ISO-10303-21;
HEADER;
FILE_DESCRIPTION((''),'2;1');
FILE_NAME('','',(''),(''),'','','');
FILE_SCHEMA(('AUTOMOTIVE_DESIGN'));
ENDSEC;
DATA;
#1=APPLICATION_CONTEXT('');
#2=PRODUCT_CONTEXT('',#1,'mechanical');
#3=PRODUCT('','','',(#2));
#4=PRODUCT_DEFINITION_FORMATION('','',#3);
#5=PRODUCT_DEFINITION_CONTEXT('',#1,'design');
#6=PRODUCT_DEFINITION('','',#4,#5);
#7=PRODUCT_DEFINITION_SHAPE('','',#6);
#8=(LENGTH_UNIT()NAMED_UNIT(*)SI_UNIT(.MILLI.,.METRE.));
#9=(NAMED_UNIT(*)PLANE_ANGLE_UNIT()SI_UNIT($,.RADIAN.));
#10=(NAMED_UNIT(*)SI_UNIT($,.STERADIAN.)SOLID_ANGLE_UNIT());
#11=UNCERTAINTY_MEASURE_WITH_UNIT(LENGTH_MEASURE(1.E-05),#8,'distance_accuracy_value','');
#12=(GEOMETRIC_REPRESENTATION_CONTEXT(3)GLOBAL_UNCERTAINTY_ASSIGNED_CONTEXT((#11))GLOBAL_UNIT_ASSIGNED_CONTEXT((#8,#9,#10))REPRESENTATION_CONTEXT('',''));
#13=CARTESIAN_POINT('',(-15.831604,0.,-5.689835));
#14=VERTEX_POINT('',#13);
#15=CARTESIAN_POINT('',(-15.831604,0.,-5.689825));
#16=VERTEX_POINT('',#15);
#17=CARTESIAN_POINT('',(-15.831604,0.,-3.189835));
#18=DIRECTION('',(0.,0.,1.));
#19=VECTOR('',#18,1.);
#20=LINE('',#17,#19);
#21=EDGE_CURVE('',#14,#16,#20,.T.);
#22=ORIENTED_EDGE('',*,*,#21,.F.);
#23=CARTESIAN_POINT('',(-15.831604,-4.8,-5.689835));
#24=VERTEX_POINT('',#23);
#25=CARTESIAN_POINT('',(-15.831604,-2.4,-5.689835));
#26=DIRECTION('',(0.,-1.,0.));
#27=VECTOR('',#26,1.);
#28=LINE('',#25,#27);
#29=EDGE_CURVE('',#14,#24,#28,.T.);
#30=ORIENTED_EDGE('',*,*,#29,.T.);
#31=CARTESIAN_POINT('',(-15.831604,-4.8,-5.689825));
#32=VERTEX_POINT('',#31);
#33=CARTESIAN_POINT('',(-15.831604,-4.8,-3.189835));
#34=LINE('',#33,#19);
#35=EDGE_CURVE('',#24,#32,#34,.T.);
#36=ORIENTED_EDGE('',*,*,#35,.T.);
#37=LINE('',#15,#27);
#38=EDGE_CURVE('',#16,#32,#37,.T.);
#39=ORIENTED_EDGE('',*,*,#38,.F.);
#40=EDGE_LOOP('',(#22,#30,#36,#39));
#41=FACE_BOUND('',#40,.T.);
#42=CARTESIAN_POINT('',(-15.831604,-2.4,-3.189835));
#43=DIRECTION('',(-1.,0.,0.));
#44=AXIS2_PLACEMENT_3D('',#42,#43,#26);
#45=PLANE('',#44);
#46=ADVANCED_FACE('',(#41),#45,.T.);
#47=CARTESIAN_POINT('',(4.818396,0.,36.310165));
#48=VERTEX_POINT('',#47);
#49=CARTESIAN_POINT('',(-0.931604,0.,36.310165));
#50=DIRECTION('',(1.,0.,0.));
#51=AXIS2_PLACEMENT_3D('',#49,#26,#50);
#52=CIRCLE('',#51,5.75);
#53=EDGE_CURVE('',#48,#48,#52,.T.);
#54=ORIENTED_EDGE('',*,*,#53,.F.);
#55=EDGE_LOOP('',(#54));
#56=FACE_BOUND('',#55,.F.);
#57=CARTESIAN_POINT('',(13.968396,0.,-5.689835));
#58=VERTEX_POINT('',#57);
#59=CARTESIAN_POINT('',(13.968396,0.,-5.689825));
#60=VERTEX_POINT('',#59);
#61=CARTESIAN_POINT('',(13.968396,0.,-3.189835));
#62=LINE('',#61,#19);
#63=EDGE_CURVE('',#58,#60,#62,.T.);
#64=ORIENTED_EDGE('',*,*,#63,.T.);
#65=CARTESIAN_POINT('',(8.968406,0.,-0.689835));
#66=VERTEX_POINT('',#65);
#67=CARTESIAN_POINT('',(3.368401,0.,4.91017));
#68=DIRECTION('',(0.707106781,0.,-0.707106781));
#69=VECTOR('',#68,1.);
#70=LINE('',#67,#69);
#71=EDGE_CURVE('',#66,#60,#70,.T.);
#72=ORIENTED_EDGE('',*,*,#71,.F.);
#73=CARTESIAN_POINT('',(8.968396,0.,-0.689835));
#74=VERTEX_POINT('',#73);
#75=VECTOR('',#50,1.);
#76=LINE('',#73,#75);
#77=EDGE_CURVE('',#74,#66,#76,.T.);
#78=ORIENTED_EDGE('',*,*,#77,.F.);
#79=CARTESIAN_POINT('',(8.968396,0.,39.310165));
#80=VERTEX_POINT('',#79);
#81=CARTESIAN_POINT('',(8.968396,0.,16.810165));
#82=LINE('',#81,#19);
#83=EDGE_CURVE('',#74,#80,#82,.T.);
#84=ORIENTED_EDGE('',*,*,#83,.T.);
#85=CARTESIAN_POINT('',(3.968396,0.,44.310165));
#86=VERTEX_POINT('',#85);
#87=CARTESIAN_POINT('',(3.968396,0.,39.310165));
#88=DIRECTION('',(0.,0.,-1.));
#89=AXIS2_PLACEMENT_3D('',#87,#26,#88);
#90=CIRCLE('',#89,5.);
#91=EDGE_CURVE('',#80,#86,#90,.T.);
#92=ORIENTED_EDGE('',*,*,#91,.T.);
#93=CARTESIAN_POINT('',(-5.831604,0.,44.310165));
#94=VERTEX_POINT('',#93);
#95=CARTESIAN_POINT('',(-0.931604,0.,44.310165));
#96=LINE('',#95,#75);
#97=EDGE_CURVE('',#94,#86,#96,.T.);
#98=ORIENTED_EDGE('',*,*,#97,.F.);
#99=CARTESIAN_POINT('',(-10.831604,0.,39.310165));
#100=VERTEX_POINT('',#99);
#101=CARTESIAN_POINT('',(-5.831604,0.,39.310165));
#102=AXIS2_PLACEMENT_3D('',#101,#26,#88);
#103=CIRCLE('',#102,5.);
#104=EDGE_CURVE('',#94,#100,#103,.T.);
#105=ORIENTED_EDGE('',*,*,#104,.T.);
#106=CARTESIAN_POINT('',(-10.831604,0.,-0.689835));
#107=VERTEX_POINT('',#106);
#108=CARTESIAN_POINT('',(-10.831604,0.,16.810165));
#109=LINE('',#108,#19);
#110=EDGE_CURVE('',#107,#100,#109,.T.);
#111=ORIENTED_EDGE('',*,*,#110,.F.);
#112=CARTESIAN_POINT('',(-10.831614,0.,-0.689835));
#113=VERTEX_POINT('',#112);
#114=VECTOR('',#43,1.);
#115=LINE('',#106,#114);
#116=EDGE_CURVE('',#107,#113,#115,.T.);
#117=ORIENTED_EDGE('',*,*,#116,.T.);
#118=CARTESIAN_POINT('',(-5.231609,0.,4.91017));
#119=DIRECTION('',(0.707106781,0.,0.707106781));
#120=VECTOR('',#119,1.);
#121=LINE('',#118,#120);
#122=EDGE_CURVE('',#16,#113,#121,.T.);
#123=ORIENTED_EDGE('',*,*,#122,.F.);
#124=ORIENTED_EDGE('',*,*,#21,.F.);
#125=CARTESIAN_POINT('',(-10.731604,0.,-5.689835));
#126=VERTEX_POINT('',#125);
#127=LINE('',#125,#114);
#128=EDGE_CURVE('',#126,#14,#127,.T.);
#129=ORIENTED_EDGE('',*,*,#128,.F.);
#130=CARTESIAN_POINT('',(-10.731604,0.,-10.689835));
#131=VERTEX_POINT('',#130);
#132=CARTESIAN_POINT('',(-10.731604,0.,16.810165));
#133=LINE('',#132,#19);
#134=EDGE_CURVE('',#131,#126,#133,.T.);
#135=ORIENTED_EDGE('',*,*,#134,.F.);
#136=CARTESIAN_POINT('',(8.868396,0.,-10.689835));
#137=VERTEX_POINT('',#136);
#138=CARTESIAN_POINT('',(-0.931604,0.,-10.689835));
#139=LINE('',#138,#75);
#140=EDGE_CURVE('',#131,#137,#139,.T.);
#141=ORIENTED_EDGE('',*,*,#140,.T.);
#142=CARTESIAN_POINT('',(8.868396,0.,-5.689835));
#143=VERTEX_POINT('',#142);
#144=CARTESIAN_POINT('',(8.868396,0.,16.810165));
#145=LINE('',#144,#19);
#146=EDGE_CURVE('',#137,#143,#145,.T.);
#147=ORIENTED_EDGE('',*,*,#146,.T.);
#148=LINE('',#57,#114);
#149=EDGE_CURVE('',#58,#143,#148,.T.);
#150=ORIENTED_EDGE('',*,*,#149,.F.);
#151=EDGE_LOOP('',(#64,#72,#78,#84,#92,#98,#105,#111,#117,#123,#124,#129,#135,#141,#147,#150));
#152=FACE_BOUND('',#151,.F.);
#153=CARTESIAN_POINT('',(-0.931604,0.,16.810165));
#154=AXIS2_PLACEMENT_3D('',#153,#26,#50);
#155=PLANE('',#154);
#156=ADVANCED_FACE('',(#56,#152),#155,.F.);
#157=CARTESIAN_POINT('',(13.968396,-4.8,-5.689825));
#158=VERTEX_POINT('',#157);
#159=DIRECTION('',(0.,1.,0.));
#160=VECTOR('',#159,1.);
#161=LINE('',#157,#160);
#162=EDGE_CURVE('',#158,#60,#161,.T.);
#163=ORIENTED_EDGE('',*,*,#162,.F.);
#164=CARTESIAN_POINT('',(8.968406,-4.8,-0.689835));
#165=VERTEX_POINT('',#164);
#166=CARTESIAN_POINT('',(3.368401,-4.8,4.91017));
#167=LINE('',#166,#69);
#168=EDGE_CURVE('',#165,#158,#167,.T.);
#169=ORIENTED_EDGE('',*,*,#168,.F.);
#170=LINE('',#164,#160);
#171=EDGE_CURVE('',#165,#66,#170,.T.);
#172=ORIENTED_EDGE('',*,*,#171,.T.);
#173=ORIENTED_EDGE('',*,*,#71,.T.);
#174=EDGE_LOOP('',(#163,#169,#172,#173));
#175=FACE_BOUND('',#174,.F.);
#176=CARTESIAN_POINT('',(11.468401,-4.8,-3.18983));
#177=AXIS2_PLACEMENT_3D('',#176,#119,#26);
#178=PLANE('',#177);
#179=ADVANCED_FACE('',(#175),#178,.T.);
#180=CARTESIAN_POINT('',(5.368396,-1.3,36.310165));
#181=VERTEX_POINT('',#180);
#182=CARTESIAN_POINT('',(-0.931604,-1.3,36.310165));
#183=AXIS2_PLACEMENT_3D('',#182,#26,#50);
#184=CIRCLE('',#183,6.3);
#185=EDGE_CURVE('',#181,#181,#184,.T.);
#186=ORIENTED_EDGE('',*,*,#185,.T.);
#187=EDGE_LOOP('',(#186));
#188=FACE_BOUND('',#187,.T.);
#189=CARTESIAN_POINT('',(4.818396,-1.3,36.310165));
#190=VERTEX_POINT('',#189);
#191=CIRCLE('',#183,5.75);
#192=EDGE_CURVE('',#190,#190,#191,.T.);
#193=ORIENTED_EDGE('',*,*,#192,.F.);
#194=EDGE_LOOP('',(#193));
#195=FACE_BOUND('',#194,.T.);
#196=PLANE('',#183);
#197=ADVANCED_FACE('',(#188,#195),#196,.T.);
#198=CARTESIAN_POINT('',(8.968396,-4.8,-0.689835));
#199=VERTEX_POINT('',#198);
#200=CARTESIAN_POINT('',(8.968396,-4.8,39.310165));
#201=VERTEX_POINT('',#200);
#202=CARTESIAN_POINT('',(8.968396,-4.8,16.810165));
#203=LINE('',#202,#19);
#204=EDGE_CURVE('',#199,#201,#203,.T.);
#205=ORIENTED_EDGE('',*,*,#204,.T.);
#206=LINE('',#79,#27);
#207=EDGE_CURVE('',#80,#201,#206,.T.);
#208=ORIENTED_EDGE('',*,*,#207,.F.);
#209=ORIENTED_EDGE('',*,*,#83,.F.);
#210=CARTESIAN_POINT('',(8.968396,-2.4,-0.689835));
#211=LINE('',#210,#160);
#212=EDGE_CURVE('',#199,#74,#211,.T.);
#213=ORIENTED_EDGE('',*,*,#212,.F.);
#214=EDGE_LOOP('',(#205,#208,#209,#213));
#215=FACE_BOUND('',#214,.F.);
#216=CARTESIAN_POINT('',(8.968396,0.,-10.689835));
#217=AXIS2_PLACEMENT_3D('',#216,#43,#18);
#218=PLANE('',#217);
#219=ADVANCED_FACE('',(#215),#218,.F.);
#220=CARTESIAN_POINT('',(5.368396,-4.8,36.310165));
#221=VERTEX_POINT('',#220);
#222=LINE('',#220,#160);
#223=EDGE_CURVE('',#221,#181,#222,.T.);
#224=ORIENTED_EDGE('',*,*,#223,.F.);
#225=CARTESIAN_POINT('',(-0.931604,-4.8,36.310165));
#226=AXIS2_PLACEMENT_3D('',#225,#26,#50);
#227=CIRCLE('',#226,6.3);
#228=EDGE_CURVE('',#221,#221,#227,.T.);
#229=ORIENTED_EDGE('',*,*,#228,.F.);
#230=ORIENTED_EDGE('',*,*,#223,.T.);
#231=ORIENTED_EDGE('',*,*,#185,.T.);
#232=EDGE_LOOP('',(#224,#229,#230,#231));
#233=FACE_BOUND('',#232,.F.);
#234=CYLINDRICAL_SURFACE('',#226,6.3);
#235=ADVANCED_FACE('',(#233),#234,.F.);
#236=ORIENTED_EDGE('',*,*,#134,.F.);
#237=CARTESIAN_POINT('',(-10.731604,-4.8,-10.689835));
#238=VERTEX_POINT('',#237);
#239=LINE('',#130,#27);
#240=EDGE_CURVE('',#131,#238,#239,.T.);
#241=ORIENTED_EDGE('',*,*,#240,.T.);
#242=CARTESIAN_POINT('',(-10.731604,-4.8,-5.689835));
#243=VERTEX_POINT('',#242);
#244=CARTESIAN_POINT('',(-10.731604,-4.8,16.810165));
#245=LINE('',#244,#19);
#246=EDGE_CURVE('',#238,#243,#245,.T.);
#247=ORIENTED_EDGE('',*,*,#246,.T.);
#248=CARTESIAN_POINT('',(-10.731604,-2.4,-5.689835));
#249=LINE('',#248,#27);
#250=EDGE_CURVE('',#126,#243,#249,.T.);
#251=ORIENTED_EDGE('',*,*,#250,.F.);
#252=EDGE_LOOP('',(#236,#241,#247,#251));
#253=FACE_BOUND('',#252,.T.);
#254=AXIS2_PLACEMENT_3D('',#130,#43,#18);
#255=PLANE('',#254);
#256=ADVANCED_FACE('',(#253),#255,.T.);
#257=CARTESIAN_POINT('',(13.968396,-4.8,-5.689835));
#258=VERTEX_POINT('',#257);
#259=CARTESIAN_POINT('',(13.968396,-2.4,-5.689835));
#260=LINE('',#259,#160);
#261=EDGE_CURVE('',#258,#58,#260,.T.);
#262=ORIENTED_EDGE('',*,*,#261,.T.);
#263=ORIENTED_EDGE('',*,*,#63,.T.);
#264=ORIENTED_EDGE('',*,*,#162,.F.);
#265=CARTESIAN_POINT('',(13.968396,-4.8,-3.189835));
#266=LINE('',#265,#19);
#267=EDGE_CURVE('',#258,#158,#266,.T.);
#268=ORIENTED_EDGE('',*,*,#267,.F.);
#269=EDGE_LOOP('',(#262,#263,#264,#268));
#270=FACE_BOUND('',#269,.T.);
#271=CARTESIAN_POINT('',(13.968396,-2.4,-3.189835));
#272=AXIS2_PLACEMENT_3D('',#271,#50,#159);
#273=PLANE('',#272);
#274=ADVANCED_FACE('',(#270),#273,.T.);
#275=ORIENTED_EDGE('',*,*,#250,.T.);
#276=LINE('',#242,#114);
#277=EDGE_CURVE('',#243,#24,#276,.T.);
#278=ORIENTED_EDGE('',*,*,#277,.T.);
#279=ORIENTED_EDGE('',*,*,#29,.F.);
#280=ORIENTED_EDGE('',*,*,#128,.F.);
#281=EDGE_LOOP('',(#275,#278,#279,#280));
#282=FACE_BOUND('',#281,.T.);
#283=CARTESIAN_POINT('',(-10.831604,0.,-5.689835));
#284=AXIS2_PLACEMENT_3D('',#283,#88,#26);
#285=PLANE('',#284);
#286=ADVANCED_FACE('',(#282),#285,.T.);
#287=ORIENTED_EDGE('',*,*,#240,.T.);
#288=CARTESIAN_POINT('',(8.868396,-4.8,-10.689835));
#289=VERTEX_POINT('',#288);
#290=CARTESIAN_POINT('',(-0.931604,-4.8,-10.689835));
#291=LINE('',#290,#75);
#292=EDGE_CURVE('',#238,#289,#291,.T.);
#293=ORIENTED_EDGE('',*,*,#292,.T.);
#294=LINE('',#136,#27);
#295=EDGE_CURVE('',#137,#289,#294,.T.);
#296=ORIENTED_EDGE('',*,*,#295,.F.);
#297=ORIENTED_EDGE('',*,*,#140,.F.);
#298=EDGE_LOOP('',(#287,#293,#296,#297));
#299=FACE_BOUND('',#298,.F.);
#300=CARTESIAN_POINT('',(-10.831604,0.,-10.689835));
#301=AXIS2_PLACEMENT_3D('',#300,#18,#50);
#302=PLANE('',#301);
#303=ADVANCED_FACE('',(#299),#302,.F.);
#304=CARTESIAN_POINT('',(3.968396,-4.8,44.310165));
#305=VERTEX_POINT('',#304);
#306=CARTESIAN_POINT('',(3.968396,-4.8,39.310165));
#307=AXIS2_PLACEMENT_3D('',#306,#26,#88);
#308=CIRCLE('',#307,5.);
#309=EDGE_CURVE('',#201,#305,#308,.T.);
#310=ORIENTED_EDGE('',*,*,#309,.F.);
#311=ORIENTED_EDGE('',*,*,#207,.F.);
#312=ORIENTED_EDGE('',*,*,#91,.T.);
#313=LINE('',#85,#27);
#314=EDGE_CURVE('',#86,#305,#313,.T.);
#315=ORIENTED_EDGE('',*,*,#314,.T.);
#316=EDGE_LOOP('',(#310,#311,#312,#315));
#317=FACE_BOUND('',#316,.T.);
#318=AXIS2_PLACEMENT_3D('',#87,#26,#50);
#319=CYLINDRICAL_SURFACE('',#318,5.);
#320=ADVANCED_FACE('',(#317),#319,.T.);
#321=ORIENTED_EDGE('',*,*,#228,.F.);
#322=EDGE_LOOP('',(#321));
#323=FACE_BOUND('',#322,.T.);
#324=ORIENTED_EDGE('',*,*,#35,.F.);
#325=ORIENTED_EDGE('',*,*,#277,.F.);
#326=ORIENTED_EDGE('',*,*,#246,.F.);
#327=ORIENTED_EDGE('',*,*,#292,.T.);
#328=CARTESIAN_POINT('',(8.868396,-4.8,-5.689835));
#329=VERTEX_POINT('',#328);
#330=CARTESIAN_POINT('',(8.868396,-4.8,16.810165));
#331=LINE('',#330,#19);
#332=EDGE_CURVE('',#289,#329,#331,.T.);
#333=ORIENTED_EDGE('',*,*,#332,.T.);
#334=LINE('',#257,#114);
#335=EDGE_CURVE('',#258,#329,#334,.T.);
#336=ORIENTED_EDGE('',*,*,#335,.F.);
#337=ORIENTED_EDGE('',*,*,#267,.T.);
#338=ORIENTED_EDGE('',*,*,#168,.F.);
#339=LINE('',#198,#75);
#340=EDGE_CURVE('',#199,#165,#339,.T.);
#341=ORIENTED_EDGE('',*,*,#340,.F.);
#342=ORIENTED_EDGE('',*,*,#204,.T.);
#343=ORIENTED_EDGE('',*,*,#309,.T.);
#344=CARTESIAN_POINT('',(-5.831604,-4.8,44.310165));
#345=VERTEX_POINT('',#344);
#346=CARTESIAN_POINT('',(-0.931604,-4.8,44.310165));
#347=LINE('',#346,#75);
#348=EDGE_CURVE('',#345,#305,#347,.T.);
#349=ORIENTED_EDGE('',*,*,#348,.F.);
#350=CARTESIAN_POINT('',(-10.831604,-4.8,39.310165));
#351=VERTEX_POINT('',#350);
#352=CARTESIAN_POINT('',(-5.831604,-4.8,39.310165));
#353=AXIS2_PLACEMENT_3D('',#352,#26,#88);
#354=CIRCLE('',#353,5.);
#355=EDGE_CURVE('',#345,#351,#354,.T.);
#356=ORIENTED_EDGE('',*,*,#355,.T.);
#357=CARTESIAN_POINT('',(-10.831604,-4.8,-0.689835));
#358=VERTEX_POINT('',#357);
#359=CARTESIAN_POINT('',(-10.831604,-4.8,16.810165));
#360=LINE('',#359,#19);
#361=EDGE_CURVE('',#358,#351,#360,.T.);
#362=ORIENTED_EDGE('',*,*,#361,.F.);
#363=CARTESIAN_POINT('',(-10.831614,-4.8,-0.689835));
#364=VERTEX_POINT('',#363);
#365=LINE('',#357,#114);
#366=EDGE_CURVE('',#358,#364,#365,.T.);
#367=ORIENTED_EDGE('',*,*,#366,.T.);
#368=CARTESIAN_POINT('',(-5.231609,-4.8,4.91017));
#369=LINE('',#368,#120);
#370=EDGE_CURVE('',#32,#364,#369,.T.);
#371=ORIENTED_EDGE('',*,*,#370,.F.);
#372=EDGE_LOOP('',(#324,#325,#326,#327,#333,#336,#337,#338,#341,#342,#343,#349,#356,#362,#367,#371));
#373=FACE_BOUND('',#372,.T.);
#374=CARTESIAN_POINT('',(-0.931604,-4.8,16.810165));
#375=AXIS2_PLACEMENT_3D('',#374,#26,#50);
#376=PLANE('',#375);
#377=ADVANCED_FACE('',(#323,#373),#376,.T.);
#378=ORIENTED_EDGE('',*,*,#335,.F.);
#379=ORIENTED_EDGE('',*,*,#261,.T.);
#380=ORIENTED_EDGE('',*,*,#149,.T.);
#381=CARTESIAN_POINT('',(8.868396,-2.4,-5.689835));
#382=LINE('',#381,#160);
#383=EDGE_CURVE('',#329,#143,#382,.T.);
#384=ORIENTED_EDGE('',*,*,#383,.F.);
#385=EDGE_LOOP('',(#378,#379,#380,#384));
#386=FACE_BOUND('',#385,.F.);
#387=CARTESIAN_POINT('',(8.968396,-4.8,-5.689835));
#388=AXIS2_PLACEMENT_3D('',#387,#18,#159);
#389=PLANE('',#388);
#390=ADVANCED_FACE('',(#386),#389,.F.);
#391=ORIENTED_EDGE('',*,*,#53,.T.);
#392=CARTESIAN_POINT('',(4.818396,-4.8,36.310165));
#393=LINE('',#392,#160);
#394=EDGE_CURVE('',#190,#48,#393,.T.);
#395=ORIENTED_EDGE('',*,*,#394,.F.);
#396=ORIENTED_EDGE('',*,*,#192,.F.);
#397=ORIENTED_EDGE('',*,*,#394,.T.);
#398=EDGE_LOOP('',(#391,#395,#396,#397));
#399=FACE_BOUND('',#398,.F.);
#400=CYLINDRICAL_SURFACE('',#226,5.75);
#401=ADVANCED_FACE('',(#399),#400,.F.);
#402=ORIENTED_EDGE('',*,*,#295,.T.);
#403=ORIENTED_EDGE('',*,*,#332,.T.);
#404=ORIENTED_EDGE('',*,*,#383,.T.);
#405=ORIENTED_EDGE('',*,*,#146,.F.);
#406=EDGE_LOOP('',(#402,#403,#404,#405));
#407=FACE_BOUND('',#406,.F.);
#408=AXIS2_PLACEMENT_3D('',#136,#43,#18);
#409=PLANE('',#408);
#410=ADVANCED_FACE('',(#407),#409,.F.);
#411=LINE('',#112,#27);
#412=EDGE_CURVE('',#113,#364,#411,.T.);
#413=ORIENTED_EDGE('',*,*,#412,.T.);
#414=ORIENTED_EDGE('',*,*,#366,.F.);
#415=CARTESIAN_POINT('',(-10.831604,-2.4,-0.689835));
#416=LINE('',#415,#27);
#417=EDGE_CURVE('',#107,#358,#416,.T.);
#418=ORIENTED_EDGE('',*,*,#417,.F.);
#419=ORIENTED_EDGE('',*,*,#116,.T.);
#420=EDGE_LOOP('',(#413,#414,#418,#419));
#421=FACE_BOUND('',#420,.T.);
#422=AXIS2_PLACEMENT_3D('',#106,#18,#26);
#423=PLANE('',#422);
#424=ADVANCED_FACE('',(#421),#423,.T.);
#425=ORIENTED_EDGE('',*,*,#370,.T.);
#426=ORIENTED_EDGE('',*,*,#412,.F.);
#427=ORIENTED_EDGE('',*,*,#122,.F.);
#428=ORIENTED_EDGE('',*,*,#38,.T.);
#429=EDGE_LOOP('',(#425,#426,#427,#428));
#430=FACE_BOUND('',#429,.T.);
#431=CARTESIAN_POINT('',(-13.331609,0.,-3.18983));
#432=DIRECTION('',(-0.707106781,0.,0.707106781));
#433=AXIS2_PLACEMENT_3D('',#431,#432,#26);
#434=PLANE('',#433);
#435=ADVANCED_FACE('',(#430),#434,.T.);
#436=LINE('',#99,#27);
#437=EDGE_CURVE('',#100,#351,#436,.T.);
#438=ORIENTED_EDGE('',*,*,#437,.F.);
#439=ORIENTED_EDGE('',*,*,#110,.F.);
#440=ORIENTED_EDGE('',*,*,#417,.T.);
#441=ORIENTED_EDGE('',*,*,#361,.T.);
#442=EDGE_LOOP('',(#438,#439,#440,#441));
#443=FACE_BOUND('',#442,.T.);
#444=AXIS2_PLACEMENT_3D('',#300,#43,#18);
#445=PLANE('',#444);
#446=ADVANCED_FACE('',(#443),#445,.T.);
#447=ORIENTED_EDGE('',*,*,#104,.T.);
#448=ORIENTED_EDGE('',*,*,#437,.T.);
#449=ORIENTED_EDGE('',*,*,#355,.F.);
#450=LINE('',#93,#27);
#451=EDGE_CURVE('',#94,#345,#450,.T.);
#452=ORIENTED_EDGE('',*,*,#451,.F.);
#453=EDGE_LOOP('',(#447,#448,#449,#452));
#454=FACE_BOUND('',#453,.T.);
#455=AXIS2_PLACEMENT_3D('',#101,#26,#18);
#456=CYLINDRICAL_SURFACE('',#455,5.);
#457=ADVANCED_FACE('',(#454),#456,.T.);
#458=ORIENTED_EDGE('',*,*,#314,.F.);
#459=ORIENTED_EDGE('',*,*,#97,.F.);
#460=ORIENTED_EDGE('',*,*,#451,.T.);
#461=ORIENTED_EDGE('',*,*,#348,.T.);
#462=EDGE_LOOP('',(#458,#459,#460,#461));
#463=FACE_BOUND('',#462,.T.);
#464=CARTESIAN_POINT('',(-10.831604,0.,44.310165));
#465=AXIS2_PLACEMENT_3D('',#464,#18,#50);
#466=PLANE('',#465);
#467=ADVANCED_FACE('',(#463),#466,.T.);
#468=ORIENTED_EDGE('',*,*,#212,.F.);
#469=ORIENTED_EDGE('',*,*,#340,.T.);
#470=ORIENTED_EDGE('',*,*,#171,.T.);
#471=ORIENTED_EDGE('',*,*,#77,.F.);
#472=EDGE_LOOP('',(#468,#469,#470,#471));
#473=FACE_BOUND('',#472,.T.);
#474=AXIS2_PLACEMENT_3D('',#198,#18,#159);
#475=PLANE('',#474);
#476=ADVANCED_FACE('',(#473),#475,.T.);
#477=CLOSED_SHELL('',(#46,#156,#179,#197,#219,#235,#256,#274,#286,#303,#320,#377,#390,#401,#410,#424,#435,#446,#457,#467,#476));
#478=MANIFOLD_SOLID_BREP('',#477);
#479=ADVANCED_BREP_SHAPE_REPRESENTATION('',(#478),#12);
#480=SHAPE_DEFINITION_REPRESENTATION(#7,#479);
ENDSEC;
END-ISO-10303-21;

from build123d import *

# Parameters (mm, degrees)
F0_W      = 19.8
F0_H      = 55
F1_DEPTH  = 4.8
F2_R      = 5.75
F3_DEPTH  = 4.8
F4_R      = 6.3
F5_DEPTH  = 3.5
F6_W      = 4.8
F6_H      = 5
F7_DEPTH  = 5
F8_SIZE   = 4.99999
F9_W      = 4.8
F9_H      = 5
F10_DEPTH = 5
F11_SIZE  = 4.99999
F12_R     = 5
F13_DEPTH = 0.1
F14_DEPTH = 0.1


# Not quite as in the source:
# - a fillet or chamfer is up to 0.001 mm smaller than in the source, because OpenCascade refuses the exact size


with BuildPart() as f1:
    # F0 (on Front) → F1 (new body)
    with BuildSketch(Plane.XZ):
        with Locations((-0.9316042997, 16.8101646874)):
            Rectangle(F0_W, F0_H)
    extrude(amount=F1_DEPTH)

    # F2 (on face) → F3 (cut, through all)
    with BuildSketch(Plane.XZ.offset(4.8)):
        with Locations((-0.9316042997, 36.3101646874)):
            Circle(F2_R)
    extrude(amount=-F3_DEPTH, mode=Mode.SUBTRACT)

    # F4 (on face) → F5 (cut)
    with BuildSketch(Plane.XZ.offset(4.8)):
        with Locations((-0.9316042997, 36.3101646874)):
            Circle(F4_R)
    extrude(amount=-F5_DEPTH, mode=Mode.SUBTRACT)

    # F6 (on face) → F7 (join)
    with BuildSketch(Plane(origin=(-10.8316042997, 0, 0), x_dir=(0, -1, 0), z_dir=(-1, 0, 0))):
        with Locations((2.4, -3.1898353126)):
            Rectangle(F6_W, F6_H)
    extrude(amount=F7_DEPTH)

    # F8 (size 5 in the source; OpenCascade refuses exactly that, so slightly less here)
    f8_edges = [f1.edges().sort_by_distance(p)[0] for p in [
        (-15.831604, -2.4, -0.689835),
    ]]
    chamfer(f8_edges, length=F8_SIZE)

    # F9 (on face) → F10 (join)
    with BuildSketch(Plane.YZ.offset(8.9683957003)):
        with Locations((-2.4, -3.1898353126)):
            Rectangle(F9_W, F9_H)
    extrude(amount=F10_DEPTH)

    # F11 (size 5 in the source; OpenCascade refuses exactly that, so slightly less here)
    f11_edges = [f1.edges().sort_by_distance(p)[0] for p in [
        (13.968396, -2.4, -0.689835),
    ]]
    chamfer(f11_edges, length=F11_SIZE)

    # F12
    f12_edges = [f1.edges().sort_by_distance(p)[0] for p in [
        (-10.831604, -2.4, 44.310165),
        (8.968396, -2.4, 44.310165),
    ]]
    fillet(f12_edges, radius=F12_R)

    # F13 (cut): a face of the model
    f13_faces = [f1.faces().sort_by_distance(p)[0] for p in [
        (-10.8316042997, -2.4, -8.1898353126),
    ]]
    extrude(f13_faces, amount=-F13_DEPTH, mode=Mode.SUBTRACT)

    # F14 (cut): a face of the model
    f14_faces = [f1.faces().sort_by_distance(p)[0] for p in [
        (8.9683957003, -2.4, -8.1898353126),
    ]]
    extrude(f14_faces, amount=-F14_DEPTH, mode=Mode.SUBTRACT)


solid = f1.part
